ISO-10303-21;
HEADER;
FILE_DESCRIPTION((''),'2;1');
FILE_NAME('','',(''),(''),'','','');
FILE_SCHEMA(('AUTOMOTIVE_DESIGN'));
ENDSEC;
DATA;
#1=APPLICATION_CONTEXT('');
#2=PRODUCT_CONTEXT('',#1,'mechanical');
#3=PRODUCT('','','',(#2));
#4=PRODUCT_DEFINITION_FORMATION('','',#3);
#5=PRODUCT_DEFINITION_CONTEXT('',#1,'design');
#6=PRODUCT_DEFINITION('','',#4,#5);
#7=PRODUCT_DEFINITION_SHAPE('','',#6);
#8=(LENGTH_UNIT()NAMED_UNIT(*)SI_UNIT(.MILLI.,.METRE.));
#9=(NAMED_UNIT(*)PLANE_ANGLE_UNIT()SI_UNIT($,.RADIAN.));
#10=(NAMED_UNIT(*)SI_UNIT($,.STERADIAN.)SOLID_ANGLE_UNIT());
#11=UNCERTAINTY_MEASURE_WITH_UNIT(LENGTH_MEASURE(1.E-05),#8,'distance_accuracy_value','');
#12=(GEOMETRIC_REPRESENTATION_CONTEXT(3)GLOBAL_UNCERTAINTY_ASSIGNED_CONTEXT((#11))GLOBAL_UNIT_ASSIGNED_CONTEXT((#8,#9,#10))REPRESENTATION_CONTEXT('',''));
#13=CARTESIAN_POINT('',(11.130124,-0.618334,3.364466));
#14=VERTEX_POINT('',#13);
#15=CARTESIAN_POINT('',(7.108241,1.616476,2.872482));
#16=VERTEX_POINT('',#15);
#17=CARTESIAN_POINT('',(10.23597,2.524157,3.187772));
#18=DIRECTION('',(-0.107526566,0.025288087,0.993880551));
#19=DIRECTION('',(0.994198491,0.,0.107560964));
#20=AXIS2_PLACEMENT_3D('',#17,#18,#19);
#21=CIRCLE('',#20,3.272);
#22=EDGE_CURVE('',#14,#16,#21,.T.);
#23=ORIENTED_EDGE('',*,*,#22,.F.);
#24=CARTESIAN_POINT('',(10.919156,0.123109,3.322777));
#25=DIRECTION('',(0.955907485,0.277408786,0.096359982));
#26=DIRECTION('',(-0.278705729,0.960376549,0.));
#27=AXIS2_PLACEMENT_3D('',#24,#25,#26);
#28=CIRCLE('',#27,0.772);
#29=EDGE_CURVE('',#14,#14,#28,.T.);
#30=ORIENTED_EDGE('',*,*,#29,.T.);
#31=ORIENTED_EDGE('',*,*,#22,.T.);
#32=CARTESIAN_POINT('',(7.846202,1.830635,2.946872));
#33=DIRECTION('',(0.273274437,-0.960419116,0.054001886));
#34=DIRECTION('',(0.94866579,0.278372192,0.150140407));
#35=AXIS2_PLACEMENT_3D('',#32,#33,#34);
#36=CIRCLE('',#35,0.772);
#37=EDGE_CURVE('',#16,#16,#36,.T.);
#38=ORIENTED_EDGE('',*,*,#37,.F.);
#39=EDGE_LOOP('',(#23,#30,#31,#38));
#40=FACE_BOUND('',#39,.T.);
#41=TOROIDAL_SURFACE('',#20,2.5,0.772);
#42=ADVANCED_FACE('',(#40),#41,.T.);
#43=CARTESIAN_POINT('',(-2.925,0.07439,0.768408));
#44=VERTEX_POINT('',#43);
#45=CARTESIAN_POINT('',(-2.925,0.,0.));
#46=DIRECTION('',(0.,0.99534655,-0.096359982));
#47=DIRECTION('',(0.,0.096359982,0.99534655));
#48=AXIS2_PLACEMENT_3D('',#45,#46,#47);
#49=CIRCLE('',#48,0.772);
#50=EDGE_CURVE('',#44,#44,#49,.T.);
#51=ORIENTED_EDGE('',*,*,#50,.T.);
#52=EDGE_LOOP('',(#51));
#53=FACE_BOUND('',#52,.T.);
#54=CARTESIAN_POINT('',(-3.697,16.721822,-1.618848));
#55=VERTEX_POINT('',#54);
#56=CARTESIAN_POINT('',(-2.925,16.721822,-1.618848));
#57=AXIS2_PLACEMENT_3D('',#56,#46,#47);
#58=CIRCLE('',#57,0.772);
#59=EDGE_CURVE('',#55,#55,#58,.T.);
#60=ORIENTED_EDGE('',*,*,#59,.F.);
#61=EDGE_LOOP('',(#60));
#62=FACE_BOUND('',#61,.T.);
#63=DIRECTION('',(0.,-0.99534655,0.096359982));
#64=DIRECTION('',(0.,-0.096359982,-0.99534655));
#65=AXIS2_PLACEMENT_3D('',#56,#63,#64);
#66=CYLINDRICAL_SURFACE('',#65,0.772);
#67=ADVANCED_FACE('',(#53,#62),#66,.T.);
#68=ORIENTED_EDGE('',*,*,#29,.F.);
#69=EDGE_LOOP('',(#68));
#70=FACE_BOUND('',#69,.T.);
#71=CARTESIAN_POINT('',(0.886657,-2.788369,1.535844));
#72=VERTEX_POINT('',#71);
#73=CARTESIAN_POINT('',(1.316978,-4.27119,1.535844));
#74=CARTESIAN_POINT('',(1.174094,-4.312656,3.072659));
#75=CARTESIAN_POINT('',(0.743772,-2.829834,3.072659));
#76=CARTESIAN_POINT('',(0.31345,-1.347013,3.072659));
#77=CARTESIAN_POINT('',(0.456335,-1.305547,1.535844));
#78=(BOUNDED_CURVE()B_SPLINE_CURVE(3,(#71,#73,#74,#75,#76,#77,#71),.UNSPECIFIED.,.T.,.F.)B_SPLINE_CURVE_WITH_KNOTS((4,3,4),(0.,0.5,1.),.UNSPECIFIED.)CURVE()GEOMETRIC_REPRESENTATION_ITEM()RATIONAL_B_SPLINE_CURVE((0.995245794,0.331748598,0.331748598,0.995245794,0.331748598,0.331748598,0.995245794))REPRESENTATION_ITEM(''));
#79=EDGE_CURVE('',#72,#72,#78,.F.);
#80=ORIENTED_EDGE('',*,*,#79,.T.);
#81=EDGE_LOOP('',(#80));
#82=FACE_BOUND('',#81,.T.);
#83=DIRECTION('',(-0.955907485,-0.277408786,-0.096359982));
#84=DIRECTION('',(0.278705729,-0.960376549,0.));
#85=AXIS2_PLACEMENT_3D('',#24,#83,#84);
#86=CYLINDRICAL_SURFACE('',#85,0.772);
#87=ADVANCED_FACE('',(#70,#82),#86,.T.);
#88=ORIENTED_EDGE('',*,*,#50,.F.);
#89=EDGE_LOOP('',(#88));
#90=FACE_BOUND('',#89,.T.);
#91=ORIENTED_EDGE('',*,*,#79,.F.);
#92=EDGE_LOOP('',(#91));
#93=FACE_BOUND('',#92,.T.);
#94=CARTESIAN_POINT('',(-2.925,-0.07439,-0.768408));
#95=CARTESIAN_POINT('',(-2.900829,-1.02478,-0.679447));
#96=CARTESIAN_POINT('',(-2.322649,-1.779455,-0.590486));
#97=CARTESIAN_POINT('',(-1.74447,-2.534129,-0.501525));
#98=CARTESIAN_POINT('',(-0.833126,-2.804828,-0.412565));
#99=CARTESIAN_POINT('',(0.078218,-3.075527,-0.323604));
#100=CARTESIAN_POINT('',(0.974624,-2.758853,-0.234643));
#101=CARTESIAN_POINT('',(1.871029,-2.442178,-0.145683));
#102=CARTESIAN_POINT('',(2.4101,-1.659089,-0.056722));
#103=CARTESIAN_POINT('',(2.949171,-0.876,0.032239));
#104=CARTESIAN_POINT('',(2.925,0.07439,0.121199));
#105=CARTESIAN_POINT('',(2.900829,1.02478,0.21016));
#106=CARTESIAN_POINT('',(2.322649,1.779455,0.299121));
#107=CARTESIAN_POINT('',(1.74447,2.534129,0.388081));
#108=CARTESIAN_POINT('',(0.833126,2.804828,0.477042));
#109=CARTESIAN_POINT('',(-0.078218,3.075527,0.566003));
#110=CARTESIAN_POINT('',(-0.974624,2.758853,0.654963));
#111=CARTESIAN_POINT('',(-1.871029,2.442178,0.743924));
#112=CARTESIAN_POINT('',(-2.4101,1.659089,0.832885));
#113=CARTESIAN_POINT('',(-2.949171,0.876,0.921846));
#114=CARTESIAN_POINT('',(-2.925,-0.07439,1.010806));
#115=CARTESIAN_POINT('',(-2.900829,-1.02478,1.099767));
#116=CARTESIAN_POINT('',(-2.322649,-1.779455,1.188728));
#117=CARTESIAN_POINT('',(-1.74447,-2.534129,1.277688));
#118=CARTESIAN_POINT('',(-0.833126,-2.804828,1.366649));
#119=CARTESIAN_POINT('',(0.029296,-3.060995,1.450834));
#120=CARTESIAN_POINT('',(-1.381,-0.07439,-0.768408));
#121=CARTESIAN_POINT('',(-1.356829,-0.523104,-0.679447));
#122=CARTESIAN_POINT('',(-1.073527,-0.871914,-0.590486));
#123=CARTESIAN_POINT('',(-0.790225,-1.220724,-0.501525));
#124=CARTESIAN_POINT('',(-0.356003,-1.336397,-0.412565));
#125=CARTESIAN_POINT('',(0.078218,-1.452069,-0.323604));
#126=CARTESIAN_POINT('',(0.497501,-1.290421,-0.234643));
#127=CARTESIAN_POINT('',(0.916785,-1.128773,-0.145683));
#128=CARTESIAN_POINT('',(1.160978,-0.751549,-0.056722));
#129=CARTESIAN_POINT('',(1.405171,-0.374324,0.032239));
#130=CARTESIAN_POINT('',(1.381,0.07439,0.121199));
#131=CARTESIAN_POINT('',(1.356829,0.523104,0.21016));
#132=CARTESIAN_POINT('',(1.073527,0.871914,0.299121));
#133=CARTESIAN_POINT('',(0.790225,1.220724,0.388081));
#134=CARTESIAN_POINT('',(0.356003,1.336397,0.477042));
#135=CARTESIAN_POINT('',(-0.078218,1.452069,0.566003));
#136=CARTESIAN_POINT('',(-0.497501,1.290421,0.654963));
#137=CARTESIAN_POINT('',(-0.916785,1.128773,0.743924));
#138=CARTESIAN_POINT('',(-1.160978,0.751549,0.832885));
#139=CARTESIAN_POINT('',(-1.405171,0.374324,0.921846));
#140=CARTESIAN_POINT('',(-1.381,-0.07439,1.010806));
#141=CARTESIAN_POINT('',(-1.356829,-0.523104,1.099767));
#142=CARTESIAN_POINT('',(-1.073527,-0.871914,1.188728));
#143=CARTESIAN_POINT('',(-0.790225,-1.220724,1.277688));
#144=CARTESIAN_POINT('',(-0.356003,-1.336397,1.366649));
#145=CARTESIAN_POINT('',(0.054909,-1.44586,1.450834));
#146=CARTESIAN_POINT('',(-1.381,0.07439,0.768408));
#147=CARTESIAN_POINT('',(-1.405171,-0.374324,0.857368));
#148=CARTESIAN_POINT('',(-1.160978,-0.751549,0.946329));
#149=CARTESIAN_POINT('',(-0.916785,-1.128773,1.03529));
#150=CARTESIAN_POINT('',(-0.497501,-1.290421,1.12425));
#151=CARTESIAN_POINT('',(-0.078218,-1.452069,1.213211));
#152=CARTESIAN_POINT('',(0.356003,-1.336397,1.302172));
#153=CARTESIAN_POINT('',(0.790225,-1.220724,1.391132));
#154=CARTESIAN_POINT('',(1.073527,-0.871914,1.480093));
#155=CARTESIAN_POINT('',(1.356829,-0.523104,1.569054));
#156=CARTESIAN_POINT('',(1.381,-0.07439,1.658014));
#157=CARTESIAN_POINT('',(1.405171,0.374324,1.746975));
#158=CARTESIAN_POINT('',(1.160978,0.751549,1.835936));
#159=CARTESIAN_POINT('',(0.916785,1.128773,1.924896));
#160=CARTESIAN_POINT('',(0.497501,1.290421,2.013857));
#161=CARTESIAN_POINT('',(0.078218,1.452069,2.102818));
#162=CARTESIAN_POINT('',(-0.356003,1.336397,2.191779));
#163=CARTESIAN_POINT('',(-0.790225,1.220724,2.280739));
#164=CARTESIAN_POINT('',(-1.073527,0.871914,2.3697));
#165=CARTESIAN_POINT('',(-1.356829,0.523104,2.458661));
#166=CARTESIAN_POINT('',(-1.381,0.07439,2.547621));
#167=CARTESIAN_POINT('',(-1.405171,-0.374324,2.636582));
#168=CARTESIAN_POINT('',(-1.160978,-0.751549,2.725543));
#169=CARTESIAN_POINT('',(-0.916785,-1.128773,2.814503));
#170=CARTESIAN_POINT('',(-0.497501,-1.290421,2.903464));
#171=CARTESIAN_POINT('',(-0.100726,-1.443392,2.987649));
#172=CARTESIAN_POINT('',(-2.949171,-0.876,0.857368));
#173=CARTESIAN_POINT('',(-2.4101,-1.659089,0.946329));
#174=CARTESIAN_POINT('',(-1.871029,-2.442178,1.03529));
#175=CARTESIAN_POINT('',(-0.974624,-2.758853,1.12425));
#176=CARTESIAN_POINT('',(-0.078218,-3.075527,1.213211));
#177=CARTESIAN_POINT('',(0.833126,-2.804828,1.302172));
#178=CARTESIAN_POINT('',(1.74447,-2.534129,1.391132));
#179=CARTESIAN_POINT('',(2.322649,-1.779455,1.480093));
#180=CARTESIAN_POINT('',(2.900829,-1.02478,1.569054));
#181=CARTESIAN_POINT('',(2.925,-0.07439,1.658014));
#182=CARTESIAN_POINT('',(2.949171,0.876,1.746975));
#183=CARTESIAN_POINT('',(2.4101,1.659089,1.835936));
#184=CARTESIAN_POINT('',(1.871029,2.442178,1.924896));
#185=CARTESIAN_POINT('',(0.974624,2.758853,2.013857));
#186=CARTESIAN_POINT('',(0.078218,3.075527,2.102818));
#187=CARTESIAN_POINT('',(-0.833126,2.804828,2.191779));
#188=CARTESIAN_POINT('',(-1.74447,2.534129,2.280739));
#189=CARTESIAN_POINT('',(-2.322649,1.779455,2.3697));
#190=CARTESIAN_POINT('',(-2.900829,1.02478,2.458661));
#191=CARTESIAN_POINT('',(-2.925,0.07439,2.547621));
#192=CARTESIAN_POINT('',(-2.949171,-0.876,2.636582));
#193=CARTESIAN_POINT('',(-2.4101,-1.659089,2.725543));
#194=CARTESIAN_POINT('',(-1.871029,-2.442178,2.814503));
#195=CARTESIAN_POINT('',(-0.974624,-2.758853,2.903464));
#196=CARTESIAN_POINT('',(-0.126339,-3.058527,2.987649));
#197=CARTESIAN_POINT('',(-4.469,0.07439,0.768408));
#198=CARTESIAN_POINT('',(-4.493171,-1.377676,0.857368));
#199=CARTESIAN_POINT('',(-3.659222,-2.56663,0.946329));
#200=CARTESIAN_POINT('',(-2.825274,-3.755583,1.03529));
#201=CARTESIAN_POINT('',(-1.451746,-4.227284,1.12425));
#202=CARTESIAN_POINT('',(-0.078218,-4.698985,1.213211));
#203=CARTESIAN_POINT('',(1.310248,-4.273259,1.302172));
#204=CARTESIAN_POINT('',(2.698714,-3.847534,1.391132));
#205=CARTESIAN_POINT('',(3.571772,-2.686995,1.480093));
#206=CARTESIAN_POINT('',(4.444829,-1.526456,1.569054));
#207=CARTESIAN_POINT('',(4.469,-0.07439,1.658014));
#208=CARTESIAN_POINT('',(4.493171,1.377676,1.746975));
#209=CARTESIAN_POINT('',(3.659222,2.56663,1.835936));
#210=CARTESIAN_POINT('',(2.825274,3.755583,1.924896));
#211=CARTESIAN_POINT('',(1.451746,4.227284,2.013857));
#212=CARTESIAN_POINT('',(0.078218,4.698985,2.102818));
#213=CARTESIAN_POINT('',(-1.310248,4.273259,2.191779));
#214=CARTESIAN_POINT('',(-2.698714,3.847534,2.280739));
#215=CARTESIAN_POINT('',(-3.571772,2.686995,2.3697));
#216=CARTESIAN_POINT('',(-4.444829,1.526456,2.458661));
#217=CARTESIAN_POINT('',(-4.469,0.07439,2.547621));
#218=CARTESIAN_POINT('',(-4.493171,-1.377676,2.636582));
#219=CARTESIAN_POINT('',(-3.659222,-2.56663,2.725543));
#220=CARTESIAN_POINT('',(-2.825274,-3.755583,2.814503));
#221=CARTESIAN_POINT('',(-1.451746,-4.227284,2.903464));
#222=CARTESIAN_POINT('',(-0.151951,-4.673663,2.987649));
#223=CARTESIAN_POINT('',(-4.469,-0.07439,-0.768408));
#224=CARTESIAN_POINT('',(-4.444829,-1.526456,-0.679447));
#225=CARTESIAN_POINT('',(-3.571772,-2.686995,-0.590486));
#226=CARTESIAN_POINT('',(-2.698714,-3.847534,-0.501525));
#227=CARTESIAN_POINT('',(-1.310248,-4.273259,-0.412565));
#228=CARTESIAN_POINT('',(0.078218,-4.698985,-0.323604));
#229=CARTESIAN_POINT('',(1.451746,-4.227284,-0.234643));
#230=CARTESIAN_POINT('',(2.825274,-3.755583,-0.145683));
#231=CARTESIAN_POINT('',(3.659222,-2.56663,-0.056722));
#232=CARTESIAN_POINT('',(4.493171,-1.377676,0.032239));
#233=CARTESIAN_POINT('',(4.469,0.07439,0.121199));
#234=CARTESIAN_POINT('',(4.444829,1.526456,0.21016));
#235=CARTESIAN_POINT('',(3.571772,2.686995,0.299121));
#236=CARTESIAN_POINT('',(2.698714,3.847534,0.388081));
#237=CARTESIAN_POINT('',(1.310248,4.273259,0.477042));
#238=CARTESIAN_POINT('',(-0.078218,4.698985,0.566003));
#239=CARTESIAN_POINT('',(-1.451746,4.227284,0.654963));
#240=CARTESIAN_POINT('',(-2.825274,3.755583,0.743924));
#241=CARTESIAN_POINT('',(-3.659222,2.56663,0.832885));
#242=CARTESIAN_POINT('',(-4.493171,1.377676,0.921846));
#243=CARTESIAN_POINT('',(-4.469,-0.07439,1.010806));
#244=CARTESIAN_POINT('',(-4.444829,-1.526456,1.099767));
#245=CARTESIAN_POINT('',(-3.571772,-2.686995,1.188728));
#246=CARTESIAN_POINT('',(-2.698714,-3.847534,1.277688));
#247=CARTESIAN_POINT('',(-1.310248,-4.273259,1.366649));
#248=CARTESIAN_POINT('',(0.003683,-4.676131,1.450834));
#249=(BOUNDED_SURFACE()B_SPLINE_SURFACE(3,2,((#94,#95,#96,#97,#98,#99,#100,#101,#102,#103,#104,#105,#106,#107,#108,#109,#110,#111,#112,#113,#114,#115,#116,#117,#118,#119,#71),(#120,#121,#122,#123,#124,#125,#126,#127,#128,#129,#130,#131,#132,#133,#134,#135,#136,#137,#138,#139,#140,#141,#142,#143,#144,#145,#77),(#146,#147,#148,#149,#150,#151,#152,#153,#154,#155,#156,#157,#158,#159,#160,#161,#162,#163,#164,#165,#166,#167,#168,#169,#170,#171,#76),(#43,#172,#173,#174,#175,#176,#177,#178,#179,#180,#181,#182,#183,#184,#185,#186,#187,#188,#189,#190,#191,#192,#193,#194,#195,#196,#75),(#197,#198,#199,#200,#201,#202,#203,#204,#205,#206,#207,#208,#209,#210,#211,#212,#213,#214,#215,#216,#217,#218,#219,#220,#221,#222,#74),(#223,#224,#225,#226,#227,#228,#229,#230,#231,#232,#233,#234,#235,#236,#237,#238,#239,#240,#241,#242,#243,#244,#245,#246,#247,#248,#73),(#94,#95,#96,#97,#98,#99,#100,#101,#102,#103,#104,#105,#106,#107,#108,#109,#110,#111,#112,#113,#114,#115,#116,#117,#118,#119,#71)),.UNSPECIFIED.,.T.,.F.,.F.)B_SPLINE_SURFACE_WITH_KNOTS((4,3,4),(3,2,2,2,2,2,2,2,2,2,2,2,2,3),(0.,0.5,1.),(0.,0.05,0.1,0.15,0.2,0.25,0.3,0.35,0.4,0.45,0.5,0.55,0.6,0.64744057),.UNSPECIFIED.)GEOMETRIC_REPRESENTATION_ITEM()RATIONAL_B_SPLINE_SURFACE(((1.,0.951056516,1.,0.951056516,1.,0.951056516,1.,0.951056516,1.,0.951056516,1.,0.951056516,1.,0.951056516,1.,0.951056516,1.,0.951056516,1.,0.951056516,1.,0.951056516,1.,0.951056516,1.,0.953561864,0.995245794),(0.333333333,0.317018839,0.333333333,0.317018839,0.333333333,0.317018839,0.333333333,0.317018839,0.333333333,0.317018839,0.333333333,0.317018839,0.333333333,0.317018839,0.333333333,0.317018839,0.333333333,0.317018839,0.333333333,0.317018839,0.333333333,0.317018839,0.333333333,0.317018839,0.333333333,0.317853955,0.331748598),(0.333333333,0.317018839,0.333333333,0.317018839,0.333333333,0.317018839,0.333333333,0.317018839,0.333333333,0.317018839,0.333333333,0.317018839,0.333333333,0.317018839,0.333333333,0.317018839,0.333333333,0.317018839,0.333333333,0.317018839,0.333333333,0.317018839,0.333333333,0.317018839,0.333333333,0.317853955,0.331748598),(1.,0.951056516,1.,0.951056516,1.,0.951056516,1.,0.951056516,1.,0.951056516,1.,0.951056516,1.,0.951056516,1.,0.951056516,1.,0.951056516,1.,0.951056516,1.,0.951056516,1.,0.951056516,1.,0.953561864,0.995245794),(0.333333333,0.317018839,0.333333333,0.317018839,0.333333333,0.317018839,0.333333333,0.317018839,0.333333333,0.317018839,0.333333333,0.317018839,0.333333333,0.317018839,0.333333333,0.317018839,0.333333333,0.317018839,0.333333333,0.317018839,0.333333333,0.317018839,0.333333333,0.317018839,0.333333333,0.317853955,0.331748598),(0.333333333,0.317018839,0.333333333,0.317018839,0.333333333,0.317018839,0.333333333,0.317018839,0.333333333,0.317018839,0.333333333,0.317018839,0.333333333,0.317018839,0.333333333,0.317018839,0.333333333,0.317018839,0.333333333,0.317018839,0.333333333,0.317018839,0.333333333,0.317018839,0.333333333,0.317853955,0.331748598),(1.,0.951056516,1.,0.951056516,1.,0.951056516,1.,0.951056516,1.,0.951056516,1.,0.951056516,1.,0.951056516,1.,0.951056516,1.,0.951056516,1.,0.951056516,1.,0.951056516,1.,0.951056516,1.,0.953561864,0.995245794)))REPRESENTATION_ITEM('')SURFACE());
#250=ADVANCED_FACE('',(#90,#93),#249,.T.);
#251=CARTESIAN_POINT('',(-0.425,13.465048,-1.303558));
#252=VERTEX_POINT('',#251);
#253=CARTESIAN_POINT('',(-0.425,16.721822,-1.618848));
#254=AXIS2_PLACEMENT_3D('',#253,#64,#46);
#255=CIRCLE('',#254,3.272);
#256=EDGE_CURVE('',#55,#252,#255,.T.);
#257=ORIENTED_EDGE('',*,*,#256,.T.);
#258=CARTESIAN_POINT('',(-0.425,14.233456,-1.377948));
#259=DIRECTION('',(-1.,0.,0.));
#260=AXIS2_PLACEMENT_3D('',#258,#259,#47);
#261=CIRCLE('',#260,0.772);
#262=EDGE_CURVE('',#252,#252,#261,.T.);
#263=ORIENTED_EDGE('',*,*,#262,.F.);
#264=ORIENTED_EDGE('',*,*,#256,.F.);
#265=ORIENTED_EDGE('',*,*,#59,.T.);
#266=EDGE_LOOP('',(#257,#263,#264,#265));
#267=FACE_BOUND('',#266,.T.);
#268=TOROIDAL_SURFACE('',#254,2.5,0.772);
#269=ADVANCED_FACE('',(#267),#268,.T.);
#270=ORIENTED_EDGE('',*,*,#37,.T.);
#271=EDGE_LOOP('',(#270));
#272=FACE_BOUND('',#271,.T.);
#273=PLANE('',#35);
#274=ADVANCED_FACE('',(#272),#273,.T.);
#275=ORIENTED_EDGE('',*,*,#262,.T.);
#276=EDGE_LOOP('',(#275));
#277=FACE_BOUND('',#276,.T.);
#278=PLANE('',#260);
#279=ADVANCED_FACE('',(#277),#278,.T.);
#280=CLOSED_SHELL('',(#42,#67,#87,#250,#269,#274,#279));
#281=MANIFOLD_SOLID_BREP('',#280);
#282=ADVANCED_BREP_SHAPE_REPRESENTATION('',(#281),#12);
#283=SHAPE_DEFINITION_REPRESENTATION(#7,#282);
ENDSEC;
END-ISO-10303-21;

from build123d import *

# Parameters (mm, degrees)
SWEEP1_PITCH        = 1.779213779
SWEEP1_HEIGHT       = 2.304
SWEEP1_RADIUS       = 2.925
SWEEP1_START_ANGLE  = -180
SWEEP1_PROFILE_R    = 0.772
SKETCH7_R           = 0.772
BOSS_EXTRUDE1_DEPTH = 16.8
SKETCH8_R           = 0.772
BOSS_EXTRUDE2_DEPTH = 10.57
SKETCH11_R          = 0.772
SKETCH13_R          = 0.772


with BuildPart() as part:
    # Sweep1: sweep along a helix
    with BuildLine() as sweep1_path:
        add(Helix(SWEEP1_PITCH, SWEEP1_HEIGHT, SWEEP1_RADIUS, center=(0, 0, 0), direction=(0, 0, 1), mode=Mode.PRIVATE).rotate(Axis((0, 0, 0), (0, 0, 1)), SWEEP1_START_ANGLE))
    # Sweep1 profile (on start of the path) → Sweep1 (sweep)
    with BuildSketch(Plane(origin=(-2.925, 0, 0), x_dir=(0, -0.09635998191573415, -0.9953465496424848), z_dir=(3.723489167447742e-13, -0.9953465496424848, 0.09635998191573415))):
        Circle(SWEEP1_PROFILE_R)
    sweep(path=sweep1_path.line, is_frenet=True)

    # Sketch7 → Boss-Extrude1 (add)
    with BuildSketch(Plane(origin=(0, 0, 0), x_dir=(1, 0, 0), z_dir=(-6.585240748028275e-15, 0.9953465496424845, -0.0963599819157373))):
        with Locations(Location((-2.925, 0, 0), (0, 0, 90))):
            Circle(SKETCH7_R)
    extrude(amount=BOSS_EXTRUDE1_DEPTH)


with BuildPart() as boss_extrude2_tool:
    # Sketch8 → Boss-Extrude2 (new body)
    with BuildSketch(Plane(origin=(0.212247465, 0.061595199, 0.021395545), x_dir=(0.1075265661741758, -0.02528808688678901, -0.9938805512879286), z_dir=(0.9559074848202312, 0.2774087856392771, 0.09635998191573736))):
        with Locations(Location((-2.131457079, -3.045125851, 0), (0, 0, 3.11007264))):
            Circle(SKETCH8_R)
    extrude(amount=BOSS_EXTRUDE2_DEPTH)


with BuildPart() as part_1:
    add(part.part)


with BuildPart() as part_2:
    # Boss-Extrude2: joined with boss_extrude2_tool
    add(part_1.part.fuse(boss_extrude2_tool.part, tol=0.00001))

    # Sweep2: sweep along a path in Sketch10
    with BuildLine(Plane(origin=(0, 0, 0), x_dir=(1, 0, 0), z_dir=(1.146900370356108e-14, 0.0963599819157373, 0.9953465496424845))) as sweep2_path:
        ThreePointArc((-2.925, 16.8), (1.342766953, 18.567766953), (-0.425, 14.3))
    # Sketch11 → Sweep2 (sweep)
    with BuildSketch(Plane(origin=(0, 16.721822034, -1.618847696), x_dir=(1, 0, 0), z_dir=(-6.585240748028275e-15, 0.9953465496424845, -0.0963599819157373))):
        with Locations((-2.925, 0)):
            Circle(SKETCH11_R)
    sweep(path=sweep2_path.line)

    # Sweep3: sweep along a path in Sketch12
    with BuildLine(Plane(origin=(-0.229188261, 0.053900472, 2.118413736), x_dir=(-0.9942021192328977, -0.0023040594171736565, -0.10750273216536163), z_dir=(0.10752656617417579, -0.025288086886788894, -0.9938805512879287))) as sweep3_path:
        ThreePointArc((-11.213339644, 0.043386775), (-11.73796444, 4.632896943), (-8.121724926, 1.758588931))
    # Sketch13 → Sweep3 (sweep)
    with BuildSketch(Plane(origin=(10.316189579, 2.993806063, 1.039920554), x_dir=(0.10752656617417658, -0.02528808688679171, -0.9938805512879285), z_dir=(0.9559074848202312, 0.2774087856392772, 0.09635998191573736))):
        with Locations((-2.131457079, -3.045125851)):
            Circle(SKETCH13_R)
    sweep(path=sweep3_path.line)


solid = part_2.part
